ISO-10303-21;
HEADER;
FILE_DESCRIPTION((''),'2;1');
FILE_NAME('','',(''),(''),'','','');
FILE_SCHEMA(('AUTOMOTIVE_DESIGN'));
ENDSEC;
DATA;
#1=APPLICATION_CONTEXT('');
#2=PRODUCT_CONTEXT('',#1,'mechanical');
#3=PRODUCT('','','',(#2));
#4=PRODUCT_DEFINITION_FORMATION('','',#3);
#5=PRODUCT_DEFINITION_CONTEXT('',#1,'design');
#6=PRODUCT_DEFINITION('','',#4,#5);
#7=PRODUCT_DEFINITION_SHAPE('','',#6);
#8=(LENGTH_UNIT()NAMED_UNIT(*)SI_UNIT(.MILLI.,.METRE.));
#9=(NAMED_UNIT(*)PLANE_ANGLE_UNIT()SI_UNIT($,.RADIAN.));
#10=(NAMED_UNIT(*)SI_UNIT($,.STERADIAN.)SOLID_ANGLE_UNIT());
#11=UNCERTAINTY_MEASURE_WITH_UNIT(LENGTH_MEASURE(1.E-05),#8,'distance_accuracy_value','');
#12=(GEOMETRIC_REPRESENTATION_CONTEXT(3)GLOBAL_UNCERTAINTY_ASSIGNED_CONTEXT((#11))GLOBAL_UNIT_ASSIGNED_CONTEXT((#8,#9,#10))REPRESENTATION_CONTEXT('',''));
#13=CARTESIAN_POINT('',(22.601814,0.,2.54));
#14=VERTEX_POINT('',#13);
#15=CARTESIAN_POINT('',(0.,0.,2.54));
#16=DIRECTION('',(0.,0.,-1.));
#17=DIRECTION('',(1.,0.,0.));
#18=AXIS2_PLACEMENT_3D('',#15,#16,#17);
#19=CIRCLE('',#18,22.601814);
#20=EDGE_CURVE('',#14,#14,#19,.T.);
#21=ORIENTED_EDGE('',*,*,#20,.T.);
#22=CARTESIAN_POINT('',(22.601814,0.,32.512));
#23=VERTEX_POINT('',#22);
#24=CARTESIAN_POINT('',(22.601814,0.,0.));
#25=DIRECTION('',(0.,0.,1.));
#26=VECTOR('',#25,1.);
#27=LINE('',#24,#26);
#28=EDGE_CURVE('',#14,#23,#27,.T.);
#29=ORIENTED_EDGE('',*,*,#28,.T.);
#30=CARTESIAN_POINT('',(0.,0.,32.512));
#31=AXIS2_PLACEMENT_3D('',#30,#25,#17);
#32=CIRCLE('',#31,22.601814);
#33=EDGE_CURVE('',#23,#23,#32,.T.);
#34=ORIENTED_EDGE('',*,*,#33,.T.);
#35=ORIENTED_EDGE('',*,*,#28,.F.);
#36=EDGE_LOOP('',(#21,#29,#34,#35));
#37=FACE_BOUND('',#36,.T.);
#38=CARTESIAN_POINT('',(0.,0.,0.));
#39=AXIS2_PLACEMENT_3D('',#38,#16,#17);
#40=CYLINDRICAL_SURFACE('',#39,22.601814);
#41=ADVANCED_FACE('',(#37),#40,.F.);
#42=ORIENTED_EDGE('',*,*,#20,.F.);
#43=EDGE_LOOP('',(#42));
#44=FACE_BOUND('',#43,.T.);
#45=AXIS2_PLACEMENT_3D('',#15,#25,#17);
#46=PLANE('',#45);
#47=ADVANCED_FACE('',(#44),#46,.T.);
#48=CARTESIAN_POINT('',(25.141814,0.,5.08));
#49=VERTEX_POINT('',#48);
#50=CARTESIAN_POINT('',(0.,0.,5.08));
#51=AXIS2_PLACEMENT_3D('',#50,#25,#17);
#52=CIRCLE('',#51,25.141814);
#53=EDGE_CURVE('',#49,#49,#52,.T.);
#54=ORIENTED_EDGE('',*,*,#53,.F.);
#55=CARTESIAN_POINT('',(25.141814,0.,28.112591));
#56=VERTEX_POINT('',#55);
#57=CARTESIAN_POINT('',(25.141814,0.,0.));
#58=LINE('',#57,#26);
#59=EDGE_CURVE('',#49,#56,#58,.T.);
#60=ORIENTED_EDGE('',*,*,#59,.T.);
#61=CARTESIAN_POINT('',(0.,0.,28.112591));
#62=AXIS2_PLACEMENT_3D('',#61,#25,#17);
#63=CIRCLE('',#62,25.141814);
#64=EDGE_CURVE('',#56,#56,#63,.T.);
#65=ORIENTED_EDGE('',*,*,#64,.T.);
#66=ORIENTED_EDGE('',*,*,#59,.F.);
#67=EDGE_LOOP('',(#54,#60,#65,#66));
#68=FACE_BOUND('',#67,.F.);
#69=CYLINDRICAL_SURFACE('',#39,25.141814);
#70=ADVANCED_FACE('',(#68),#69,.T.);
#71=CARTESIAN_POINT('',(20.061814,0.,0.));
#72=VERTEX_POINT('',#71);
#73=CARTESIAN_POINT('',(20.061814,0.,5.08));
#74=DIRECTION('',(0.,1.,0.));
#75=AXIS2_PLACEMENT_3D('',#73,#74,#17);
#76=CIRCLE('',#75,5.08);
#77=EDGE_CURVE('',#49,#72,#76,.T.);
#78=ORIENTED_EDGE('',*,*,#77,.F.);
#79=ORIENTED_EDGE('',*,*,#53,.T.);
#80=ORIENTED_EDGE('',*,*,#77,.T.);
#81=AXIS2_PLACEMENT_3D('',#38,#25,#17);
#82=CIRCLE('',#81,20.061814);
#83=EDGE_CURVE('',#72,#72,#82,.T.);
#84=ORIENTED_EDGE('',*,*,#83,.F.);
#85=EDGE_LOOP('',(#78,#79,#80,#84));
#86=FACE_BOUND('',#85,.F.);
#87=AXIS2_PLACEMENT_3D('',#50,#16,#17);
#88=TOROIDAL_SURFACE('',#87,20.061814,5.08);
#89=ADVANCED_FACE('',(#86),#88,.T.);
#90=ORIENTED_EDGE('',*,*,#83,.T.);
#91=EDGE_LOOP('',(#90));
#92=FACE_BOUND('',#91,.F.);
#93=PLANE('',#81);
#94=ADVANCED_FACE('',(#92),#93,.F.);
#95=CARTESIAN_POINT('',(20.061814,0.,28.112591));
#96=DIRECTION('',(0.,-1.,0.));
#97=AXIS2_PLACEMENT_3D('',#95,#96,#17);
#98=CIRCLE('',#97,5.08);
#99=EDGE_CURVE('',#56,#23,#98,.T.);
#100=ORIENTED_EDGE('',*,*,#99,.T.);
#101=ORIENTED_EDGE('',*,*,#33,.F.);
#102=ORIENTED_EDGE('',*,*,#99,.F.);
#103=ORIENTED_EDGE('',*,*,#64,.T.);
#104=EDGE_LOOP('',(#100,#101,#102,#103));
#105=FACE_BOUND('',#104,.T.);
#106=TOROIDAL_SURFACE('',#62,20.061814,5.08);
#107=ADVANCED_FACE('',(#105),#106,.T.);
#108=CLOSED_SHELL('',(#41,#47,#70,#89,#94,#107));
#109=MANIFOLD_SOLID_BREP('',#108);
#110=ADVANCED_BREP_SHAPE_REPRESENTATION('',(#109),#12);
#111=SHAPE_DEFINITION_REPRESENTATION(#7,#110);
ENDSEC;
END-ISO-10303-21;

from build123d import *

# Parameters (mm, degrees)
F0_R     = 25.1418135505
F1_DEPTH = 32.512
F2_T     = -2.54


# Not quite as in the source:
# - a fillet or chamfer that OpenCascade refuses, or shapes differently, is made with other operations: its cross-section is extruded or revolved along the edge and cut away or added


with BuildPart() as f1:
    # F0 (on Top) → F1 (new body)
    with BuildSketch(Plane.XY):
        Circle(F0_R)
    extrude(amount=F1_DEPTH)

    # F2
    f2_openings = [f1.faces().sort_by_distance(p)[0] for p in [
        (0, 0, 32.512),
    ]]
    offset(amount=F2_T, openings=f2_openings)

    # F3: fillet of radius 5.08 on 3 edges, made by hand

    # F3_s1 → F3_t2 (revolve, cut)
    with BuildSketch(Plane.XZ):
        with BuildLine():
            ThreePointArc((25.1418135505, 28.1125909488), (24.4612226018, 30.6525909488), (22.6018135505, 32.512))
            Line((22.6018135505, 32.512), (22.6526135505, 32.599988181))
            ThreePointArc((22.6526135505, 32.599988181), (23.8718135505, 32.6136), (25.1418135505, 32.6136))
            Line((25.1418135505, 32.6136), (25.2434135505, 32.512))
            Line((25.2434135505, 32.512), (25.2434135505, 28.1125909488))
            Line((25.2434135505, 28.1125909488), (25.1418135505, 28.1125909488))
        make_face()
    revolve(axis=Axis((0, 0, 32.512), (0, 0, 1)), mode=Mode.SUBTRACT)

    # F3_s3 → F3_t4 (revolve, cut)
    with BuildSketch(Plane.XZ):
        with BuildLine():
            ThreePointArc((25.1418135505, 5.08), (23.653915999, 1.4878975516), (20.0618135505, 0))
            Line((20.0618135505, 0), (20.0618135505, -0.1016))
            Line((20.0618135505, -0.1016), (25.2434135505, -0.1016))
            Line((25.2434135505, -0.1016), (25.2434135505, 5.08))
            Line((25.2434135505, 5.08), (25.1418135505, 5.08))
        make_face()
    revolve(axis=Axis((0, 0, 0), (0, 0, 1)), mode=Mode.SUBTRACT)


solid = f1.part
